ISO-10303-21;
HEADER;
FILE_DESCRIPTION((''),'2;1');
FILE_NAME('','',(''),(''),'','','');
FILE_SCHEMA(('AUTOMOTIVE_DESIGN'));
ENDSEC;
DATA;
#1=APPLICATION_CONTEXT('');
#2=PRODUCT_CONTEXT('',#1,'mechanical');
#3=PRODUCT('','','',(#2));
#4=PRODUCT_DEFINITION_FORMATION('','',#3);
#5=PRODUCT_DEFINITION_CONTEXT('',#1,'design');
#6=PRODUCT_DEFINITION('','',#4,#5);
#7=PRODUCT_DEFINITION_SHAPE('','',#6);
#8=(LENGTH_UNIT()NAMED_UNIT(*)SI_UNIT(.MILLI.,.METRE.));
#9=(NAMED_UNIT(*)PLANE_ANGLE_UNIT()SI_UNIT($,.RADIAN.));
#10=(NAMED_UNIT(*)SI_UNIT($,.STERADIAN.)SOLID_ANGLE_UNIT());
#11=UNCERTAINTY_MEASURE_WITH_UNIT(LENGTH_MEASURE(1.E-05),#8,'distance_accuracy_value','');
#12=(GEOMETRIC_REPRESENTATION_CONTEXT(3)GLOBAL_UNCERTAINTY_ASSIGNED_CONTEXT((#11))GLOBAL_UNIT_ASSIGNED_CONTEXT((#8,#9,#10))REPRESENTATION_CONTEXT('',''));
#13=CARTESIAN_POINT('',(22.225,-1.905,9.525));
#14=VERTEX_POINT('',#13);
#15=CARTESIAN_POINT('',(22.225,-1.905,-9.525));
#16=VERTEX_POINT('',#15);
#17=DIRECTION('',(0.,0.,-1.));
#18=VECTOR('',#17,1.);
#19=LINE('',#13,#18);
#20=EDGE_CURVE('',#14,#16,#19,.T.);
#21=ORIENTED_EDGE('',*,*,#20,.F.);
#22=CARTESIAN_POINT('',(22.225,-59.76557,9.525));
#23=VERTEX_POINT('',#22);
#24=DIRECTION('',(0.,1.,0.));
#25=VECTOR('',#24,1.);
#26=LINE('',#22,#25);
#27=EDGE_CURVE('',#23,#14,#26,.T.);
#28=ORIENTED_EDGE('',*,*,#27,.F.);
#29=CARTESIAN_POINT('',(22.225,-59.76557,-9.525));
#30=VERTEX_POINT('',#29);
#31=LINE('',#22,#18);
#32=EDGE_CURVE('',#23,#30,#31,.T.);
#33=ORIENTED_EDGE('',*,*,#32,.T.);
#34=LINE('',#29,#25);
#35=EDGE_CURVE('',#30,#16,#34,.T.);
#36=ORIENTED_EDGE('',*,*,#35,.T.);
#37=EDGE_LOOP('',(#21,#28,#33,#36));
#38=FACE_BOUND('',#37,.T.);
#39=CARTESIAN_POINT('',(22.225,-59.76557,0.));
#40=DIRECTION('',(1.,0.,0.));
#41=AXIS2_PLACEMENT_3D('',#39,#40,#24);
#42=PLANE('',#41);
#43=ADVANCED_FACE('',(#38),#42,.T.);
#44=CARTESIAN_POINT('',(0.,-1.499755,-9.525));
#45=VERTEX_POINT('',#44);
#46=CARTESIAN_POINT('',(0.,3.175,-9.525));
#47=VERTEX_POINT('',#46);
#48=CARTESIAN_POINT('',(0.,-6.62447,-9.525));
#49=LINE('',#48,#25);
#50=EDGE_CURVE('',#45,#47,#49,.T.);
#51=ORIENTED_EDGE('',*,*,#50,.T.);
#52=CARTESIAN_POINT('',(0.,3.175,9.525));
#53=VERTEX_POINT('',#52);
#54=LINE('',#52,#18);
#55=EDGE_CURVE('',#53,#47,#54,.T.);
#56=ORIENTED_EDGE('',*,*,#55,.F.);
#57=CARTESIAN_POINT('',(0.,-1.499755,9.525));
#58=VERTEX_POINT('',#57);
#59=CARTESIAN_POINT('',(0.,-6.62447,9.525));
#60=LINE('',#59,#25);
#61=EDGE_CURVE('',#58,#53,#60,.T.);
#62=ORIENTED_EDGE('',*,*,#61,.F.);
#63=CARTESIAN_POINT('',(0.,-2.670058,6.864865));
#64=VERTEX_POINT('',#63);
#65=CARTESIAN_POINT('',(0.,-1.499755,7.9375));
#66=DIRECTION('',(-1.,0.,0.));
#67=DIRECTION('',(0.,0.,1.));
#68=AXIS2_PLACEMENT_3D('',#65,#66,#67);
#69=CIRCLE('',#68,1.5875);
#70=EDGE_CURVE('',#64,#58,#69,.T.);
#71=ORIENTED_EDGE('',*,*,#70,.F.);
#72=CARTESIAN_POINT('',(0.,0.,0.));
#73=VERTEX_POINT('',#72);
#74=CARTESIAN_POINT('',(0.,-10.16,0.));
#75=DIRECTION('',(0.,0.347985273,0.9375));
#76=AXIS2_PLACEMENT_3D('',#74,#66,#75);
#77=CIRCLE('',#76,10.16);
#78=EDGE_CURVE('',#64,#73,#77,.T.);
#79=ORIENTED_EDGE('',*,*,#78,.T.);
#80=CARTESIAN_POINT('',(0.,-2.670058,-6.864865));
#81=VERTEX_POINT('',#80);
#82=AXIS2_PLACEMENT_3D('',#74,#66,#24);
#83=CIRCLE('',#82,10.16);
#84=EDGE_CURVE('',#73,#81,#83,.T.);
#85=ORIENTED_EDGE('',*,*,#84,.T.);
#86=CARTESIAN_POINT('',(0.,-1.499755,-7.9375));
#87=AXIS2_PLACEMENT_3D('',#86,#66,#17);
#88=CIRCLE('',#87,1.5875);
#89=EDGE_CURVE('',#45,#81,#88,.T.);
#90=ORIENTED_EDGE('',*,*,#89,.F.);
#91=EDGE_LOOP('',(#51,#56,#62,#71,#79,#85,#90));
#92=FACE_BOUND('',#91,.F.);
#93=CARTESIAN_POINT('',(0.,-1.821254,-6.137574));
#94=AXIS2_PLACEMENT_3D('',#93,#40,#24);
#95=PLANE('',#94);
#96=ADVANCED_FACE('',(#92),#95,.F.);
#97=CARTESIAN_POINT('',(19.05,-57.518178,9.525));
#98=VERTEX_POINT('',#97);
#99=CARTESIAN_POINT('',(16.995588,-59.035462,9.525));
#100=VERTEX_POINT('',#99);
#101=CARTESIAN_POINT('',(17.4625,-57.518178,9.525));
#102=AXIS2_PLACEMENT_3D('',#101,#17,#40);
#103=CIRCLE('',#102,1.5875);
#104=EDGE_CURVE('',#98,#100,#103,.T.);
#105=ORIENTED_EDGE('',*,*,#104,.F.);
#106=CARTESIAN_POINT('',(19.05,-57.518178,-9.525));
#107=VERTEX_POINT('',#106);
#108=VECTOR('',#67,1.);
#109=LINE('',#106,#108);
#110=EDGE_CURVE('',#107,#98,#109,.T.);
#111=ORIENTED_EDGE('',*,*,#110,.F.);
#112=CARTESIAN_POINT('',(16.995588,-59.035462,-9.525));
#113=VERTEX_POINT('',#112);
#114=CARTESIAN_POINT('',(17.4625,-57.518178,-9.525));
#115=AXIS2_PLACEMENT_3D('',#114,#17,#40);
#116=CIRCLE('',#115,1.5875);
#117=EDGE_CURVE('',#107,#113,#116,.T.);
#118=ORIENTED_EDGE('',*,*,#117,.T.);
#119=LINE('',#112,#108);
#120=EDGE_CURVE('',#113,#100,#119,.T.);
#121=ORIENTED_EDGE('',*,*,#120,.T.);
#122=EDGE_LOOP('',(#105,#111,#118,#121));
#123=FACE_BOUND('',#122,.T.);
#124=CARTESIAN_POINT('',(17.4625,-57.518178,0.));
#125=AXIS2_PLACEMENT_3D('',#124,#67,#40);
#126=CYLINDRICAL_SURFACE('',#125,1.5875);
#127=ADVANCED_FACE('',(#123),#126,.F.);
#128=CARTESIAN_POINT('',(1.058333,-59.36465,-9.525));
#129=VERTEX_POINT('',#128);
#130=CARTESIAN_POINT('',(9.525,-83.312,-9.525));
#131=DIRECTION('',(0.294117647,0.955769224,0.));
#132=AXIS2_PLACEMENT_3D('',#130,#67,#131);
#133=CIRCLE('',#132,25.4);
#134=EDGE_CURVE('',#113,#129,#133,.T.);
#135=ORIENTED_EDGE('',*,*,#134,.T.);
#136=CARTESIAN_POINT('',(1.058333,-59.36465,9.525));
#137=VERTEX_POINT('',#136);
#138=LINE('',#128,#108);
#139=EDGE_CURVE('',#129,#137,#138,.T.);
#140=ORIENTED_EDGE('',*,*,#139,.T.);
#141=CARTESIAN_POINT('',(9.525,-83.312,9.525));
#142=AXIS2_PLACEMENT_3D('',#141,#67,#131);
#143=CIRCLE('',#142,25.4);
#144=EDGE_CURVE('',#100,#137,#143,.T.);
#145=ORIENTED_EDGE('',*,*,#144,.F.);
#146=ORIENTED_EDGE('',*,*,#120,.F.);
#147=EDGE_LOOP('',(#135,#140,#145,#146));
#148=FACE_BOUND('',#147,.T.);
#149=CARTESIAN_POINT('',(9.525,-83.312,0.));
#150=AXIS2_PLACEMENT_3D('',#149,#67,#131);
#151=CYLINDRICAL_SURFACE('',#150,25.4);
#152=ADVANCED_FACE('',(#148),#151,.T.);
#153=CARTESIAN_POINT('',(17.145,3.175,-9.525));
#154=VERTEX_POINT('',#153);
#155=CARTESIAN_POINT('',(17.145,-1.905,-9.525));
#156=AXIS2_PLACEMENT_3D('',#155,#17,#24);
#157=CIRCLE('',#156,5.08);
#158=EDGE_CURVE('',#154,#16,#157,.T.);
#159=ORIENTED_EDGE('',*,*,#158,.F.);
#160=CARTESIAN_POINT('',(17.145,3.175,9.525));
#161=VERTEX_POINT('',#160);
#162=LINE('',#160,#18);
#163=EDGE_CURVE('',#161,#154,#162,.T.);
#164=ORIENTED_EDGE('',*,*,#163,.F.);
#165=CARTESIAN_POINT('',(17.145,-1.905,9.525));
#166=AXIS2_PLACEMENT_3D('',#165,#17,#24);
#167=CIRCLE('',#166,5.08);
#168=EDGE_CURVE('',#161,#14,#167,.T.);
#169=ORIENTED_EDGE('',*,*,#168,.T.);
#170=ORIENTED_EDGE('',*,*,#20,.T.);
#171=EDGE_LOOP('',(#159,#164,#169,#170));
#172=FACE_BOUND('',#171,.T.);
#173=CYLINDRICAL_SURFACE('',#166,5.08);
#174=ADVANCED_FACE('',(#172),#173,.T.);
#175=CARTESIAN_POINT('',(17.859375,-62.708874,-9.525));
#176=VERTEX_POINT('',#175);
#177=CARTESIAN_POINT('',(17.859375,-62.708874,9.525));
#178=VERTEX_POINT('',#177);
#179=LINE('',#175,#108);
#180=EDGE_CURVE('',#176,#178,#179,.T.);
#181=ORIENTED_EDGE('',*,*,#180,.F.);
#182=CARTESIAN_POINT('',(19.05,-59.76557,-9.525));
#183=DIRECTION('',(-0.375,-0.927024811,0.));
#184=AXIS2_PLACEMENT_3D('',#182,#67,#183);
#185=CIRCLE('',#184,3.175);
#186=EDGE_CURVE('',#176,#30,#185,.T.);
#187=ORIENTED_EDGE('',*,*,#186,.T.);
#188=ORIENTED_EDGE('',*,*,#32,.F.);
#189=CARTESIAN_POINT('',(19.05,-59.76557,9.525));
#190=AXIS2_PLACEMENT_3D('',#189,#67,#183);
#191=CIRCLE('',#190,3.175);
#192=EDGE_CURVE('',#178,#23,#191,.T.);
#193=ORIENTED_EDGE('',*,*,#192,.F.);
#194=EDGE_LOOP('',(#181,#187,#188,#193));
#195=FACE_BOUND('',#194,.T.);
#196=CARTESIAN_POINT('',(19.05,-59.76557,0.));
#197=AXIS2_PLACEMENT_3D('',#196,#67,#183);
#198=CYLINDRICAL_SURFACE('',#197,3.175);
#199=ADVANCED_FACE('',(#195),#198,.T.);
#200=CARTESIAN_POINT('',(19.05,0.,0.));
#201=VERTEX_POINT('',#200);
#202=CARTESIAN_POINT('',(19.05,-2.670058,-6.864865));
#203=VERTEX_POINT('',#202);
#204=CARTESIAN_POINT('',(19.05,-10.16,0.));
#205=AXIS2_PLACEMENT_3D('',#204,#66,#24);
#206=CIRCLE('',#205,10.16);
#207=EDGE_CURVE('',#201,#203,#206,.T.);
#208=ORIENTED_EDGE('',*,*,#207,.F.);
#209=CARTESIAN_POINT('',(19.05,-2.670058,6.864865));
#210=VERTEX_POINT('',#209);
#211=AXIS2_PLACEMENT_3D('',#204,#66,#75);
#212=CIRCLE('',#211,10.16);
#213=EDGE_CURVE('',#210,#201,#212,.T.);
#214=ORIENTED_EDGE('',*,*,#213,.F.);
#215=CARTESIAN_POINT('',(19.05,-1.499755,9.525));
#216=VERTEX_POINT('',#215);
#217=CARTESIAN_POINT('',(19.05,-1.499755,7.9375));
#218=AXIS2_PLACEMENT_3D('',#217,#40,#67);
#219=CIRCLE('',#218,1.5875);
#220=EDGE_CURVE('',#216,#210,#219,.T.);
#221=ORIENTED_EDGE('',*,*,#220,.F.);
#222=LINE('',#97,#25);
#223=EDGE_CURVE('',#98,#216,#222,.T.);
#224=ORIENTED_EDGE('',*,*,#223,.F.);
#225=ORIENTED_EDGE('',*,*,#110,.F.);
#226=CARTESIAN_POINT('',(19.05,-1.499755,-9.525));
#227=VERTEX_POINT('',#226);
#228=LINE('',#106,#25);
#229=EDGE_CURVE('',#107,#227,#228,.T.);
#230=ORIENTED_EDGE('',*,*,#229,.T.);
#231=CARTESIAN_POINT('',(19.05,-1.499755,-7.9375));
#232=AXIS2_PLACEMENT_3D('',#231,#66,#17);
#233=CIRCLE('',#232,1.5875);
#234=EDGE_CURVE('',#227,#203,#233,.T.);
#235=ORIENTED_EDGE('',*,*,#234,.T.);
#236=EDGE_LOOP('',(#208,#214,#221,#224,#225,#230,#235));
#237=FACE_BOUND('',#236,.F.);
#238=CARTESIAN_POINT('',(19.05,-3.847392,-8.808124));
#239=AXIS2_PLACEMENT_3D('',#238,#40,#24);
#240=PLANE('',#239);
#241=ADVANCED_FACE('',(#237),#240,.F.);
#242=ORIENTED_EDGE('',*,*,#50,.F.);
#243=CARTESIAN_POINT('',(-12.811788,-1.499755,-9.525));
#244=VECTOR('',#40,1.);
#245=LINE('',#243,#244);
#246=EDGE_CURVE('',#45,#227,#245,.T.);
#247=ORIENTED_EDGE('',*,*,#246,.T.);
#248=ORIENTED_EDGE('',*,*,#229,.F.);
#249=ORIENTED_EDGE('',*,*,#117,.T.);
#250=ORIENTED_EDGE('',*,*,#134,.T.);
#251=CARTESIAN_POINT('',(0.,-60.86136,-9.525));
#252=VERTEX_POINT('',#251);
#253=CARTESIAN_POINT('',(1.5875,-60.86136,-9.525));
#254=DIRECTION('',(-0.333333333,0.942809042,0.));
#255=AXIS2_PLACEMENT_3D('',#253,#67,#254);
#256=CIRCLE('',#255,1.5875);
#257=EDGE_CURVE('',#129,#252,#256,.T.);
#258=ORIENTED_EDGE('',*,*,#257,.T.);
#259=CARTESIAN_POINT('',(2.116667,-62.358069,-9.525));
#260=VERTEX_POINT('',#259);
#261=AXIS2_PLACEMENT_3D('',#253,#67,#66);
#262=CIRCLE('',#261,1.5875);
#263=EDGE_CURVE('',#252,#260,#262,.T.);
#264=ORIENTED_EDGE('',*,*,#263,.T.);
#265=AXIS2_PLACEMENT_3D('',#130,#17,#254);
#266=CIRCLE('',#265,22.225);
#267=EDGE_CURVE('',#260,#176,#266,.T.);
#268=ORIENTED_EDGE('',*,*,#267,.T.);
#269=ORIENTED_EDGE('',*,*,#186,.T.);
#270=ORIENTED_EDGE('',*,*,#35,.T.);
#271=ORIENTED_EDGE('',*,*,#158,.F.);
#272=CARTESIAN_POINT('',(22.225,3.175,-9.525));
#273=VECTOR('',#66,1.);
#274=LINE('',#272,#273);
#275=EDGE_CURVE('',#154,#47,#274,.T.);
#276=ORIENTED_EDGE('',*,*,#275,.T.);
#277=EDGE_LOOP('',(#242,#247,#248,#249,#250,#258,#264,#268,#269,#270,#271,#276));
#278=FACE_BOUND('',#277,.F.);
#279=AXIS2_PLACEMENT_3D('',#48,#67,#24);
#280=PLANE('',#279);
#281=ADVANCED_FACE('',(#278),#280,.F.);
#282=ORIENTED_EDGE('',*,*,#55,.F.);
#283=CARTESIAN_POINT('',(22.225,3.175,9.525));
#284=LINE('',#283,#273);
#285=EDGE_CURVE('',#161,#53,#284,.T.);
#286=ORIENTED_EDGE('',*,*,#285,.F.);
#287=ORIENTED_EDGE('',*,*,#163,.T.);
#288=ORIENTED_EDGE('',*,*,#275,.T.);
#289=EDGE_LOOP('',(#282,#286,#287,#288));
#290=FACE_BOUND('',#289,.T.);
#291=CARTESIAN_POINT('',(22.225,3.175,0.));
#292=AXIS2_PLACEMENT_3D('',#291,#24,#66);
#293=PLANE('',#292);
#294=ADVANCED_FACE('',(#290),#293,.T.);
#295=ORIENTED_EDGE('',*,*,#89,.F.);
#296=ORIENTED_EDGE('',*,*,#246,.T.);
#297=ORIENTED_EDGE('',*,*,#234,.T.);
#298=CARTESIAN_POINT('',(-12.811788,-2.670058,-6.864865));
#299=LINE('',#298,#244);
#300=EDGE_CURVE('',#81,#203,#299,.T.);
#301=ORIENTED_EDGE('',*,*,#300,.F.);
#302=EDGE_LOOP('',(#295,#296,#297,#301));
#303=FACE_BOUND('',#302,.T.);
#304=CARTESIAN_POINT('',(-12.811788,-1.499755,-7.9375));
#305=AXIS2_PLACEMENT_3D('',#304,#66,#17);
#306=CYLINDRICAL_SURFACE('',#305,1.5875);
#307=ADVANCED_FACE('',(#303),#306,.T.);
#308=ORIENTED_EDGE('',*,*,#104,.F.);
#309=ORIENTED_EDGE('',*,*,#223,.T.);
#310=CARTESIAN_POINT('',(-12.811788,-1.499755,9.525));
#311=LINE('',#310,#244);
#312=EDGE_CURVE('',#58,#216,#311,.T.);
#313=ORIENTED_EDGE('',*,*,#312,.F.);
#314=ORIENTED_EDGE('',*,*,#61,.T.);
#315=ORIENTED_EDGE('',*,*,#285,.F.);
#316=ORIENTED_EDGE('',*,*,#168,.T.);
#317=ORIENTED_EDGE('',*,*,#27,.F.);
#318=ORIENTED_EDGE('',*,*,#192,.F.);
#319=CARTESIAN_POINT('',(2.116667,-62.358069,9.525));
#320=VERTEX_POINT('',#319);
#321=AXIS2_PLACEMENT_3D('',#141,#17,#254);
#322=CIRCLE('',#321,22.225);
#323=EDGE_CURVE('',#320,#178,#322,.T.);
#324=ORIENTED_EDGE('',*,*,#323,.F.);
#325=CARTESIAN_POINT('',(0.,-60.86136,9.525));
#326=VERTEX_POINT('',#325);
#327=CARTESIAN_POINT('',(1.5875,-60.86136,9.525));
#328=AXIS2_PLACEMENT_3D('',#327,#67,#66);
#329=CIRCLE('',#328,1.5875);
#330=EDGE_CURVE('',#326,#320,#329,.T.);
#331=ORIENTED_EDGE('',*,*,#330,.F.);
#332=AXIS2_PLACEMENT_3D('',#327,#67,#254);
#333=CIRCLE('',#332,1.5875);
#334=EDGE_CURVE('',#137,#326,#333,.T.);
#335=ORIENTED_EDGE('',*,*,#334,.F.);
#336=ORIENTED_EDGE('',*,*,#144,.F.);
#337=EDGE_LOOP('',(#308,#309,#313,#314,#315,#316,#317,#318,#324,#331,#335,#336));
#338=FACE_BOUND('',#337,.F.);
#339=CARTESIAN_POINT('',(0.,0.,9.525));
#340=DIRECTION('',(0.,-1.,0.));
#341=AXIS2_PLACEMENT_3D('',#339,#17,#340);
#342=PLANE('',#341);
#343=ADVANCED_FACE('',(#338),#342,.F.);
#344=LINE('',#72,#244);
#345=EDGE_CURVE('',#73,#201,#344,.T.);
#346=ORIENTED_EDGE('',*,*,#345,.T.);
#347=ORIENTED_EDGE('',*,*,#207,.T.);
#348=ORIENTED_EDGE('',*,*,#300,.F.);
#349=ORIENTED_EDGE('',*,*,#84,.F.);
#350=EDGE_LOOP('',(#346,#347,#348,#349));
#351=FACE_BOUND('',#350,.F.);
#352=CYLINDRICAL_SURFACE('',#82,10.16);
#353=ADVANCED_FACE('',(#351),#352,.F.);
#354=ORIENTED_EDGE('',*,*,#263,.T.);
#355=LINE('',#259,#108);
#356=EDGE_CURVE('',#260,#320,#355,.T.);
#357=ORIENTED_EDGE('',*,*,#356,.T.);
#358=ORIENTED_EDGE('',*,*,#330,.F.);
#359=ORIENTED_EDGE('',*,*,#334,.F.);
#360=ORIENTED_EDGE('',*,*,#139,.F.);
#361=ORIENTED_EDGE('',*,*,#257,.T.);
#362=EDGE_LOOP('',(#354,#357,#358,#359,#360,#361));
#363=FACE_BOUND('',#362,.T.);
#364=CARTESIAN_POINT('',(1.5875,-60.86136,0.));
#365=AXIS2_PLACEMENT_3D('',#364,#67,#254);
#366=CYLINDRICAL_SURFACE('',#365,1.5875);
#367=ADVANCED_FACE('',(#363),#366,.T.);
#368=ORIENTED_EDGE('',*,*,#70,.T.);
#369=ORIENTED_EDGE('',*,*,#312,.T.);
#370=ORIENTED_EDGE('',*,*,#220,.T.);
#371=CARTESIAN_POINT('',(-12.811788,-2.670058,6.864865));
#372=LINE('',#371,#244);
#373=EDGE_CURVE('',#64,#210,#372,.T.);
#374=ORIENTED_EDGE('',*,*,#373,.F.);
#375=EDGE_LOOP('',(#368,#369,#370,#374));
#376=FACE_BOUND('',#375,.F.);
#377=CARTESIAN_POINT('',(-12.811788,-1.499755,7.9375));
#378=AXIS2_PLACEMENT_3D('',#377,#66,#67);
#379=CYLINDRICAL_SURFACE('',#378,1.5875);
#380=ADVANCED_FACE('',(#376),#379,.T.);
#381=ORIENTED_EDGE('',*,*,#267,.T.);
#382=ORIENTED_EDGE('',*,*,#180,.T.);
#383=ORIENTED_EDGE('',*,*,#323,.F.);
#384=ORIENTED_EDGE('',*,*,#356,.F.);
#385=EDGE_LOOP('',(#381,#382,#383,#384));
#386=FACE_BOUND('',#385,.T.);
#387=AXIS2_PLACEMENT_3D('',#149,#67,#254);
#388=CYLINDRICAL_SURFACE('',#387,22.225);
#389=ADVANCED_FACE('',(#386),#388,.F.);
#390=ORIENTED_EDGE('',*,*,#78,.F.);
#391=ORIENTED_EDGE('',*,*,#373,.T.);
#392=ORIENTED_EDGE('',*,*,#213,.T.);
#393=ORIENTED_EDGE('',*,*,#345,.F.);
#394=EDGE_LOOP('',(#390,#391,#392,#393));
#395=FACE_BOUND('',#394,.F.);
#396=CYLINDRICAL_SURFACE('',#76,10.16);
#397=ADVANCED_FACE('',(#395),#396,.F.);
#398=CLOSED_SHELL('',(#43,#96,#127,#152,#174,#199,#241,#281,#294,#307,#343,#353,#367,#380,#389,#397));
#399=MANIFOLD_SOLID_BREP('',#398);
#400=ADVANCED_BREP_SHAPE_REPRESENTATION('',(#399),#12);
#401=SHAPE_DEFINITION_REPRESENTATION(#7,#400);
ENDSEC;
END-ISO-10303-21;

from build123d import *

# Parameters (mm, degrees)
F2_DEPTH    = 9.525
F3_DEPTH    = 19.05
F4_T1_DEPTH = 31.861787518
F5_R        = 5.08


# Not quite as in the source:
# - a fillet or chamfer that OpenCascade refuses, or shapes differently, is made with other operations: its cross-section is extruded or revolved along the edge and cut away or added


with BuildPart() as f2:
    # F0 (on Top) → F2 (new body, symmetric)
    with BuildSketch(Plane.XY):
        with BuildLine():
            Line((0, 3.175), (0, 0))
            Line((0, 0), (19.05, 0))
            Line((19.05, 0), (19.05, -57.5181780653))
            ThreePointArc((19.05, -57.5181780653), (18.4056155347, -58.7951625359), (16.9955882353, -59.0354617085))
            ThreePointArc((16.9955882353, -59.0354617085), (9.0004674941, -57.9174166081), (1.0583333333, -59.3646503438))
            ThreePointArc((1.0583333333, -59.3646503438), (0.2913116778, -59.944816145), (0, -60.8613596973))
            ThreePointArc((0, -60.8613596973), (0.6709564477, -62.1575480195), (2.1166666667, -62.3580690508))
            ThreePointArc((2.1166666667, -62.3580690508), (10.0201305345, -61.0925159656), (17.859375, -62.708873578))
            ThreePointArc((17.859375, -62.708873578), (20.8248789571, -62.3981407308), (22.225, -59.7655698035))
            Line((22.225, -59.7655698035), (22.225, 3.175))
            Line((22.225, 3.175), (0, 3.175))
        make_face()
    extrude(amount=F2_DEPTH, both=True)

    # F1 (on Right) → F3 (join, through all)
    with BuildSketch(Plane.YZ):
        with BuildLine():
            Line((-6.6244696296, -9.525), (0, -9.525))
            Line((0, -9.525), (0, 0))
            ThreePointArc((0, 0), (-1.8189392592, -5.8010607408), (-6.6244696296, -9.525))
        make_face()
        with BuildLine():
            ThreePointArc((-6.6244696296, 9.525), (-1.8189392592, 5.8010607408), (0, 0))
            Line((0, 0), (0, 9.525))
            Line((0, 9.525), (-6.6244696296, 9.525))
        make_face()
    extrude(amount=F3_DEPTH)

    # F4: fillet of radius 1.5875 on 2 edges, made by hand

    # F4_s2 → F4_t1 (cut)
    with BuildSketch(Plane.YZ.offset(-12.811787518)):
        with BuildLine():
            ThreePointArc((-1.4997546224, 9.525), (-2.9528486536, 8.5767761426), (-2.6700580518, 6.8648648649))
            ThreePointArc((-2.6700580518, 6.8648648649), (-4.4890794666, 8.4300806819), (-6.6244696296, 9.525))
            Line((-6.6244696296, 9.525), (-1.4997546224, 9.525))
        make_face()
        with BuildLine():
            ThreePointArc((-1.4997546224, -9.525), (-2.9528486536, -8.5767761426), (-2.6700580518, -6.8648648649))
            ThreePointArc((-2.6700580518, -6.8648648649), (-4.4890794666, -8.4300806819), (-6.6244696296, -9.525))
            Line((-6.6244696296, -9.525), (-1.4997546224, -9.525))
        make_face()
    extrude(amount=F4_T1_DEPTH, mode=Mode.SUBTRACT)

    # F5
    f5_edges = [f2.edges().sort_by_distance(p)[0] for p in [
        (22.225, 3.175, -4.7625),
        (22.225, 3.175, 4.7625),
    ]]
    fillet(f5_edges, radius=F5_R)


solid = f2.part
